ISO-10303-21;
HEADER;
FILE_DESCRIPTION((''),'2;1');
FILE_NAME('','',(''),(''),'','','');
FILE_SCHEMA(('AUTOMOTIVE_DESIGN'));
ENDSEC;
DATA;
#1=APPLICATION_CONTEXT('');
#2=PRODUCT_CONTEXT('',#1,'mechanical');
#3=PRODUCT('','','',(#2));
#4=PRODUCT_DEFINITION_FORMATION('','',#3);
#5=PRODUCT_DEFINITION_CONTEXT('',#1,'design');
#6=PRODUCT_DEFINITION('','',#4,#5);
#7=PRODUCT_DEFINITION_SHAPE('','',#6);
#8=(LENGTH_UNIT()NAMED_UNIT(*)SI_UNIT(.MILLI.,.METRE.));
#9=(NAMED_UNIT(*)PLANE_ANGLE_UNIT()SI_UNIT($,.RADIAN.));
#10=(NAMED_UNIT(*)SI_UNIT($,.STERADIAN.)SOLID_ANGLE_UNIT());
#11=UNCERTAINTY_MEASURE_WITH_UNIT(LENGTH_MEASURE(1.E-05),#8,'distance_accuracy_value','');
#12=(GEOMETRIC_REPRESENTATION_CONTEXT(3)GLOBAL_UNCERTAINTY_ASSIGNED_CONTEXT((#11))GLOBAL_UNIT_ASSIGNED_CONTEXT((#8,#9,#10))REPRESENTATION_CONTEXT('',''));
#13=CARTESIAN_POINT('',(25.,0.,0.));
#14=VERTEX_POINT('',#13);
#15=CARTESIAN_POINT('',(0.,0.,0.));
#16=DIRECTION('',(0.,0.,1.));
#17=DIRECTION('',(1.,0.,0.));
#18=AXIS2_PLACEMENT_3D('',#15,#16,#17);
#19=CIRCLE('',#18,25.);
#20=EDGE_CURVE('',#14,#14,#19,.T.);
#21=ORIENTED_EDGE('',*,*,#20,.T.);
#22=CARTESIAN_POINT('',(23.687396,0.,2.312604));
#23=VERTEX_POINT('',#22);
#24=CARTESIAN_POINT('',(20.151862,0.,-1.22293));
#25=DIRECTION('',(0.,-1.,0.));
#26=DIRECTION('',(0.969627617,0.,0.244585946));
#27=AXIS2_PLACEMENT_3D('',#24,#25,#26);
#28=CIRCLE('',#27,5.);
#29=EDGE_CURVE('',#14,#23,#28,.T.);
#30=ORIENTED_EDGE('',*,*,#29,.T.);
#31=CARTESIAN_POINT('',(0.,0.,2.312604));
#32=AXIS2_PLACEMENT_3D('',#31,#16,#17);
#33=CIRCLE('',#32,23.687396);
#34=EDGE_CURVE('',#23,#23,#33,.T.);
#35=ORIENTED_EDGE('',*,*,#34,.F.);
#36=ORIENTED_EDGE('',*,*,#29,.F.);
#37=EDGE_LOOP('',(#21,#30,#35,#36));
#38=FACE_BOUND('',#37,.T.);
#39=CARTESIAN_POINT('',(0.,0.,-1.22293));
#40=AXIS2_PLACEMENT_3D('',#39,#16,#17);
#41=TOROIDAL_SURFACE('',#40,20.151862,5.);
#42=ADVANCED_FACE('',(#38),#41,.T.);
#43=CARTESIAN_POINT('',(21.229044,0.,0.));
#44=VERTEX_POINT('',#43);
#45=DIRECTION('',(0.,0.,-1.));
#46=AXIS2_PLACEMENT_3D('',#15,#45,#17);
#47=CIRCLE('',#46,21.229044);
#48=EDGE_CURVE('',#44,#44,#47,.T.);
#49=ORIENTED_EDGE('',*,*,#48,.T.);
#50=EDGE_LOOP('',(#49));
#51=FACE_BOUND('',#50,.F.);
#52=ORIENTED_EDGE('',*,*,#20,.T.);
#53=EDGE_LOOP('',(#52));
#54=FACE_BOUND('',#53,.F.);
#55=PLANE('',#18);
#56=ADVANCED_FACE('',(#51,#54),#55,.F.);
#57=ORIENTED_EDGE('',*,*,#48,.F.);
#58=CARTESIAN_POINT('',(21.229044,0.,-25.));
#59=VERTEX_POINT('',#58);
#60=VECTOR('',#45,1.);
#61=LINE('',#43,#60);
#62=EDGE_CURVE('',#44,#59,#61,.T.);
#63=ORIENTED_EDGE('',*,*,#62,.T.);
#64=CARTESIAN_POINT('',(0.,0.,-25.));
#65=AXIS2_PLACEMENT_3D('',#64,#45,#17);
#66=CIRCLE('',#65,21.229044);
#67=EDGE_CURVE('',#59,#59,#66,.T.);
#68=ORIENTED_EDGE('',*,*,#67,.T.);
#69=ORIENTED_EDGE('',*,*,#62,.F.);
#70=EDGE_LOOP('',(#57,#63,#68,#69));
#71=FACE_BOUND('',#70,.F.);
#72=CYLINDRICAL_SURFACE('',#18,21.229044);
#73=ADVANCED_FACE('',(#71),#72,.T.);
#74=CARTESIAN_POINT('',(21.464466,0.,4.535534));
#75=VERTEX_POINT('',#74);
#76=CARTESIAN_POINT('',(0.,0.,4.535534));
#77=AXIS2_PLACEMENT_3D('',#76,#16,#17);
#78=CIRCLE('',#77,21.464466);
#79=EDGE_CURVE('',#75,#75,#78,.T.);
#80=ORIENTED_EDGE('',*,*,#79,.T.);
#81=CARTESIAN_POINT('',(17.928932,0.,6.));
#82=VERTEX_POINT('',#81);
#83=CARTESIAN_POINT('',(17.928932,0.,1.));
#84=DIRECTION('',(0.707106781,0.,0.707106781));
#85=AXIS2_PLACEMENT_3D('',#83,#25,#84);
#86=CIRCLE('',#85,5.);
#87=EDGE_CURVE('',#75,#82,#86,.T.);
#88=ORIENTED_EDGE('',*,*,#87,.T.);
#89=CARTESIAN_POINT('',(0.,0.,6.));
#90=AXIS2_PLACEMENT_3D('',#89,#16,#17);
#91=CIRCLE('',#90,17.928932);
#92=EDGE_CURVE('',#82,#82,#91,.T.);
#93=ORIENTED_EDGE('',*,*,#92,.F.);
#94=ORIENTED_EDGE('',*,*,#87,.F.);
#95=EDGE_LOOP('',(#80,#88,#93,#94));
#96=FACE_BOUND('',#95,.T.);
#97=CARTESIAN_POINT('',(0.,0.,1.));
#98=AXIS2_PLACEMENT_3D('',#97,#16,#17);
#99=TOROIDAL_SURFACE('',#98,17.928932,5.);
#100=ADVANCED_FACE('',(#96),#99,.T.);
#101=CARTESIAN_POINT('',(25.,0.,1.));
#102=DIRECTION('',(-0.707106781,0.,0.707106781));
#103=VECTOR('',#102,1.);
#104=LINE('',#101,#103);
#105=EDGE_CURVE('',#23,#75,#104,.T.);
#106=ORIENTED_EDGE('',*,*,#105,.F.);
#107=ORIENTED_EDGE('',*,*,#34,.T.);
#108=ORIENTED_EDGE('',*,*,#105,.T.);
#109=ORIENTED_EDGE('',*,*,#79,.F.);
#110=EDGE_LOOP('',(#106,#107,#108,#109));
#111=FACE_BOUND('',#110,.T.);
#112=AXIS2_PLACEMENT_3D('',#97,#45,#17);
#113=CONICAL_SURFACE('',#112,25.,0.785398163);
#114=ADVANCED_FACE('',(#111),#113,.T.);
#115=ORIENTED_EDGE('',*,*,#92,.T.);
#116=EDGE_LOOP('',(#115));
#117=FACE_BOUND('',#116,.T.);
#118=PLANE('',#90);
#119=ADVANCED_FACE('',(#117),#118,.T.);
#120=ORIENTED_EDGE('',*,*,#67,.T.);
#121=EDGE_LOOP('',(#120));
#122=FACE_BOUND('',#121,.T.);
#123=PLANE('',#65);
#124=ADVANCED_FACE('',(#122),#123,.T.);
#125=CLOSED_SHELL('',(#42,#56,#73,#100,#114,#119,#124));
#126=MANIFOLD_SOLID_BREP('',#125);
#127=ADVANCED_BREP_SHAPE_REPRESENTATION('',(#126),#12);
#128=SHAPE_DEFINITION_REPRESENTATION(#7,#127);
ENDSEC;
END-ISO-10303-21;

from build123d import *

# Parameters (mm, degrees)
F0_R     = 25
F1_DEPTH = 6
F2_R     = 21.4280280098
F3_DEPTH = 3
F4_SIZE  = 5
F6_R     = 21.8410066176
F7_DEPTH = 4
F8_R     = 21.2290439381
F9_DEPTH = 25


# Not quite as in the source:
# - a fillet or chamfer that OpenCascade refuses, or shapes differently, is made with other operations: its cross-section is extruded or revolved along the edge and cut away or added


with BuildPart() as f1:
    # F0 (on Top) → F1 (new body)
    with BuildSketch(Plane.XY):
        Circle(F0_R)
    extrude(amount=F1_DEPTH)

    # F2 (on face) → F3 (join)
    with BuildSketch(Plane.XY.offset(6)):
        Circle(F2_R)
    extrude(amount=-F3_DEPTH)

    # F4
    f4_edges = [f1.edges().sort_by_distance(p)[0] for p in [
        (-25, 0, 6),
    ]]
    chamfer(f4_edges, length=F4_SIZE)

    # F5: fillet of radius 5 on 3 edges, made by hand

    # F5_s1 → F5_t2 (revolve, cut)
    with BuildSketch(Plane.XZ):
        with BuildLine():
            ThreePointArc((25, 0), (24.5002551285, 1.2451619378), (23.687395822, 2.312604178))
            Line((23.687395822, 2.312604178), (25, 1))
            Line((25, 1), (25, 0))
        make_face()
    revolve(axis=Axis((0, 0, 1), (0, 0, 1)), mode=Mode.SUBTRACT)

    # F5_s3 → F5_t4 (revolve, cut)
    with BuildSketch(Plane.XZ):
        with BuildLine():
            ThreePointArc((21.4644660941, 4.5355339059), (19.84234935, 5.6193976626), (17.9289321881, 6))
            Line((17.9289321881, 6), (20, 6))
            Line((20, 6), (21.4644660941, 4.5355339059))
        make_face()
    revolve(axis=Axis((0, 0, 6), (0, 0, 1)), mode=Mode.SUBTRACT)

    # F6 (on face) → F7 (join)
    with BuildSketch(Plane(origin=(0, 0, 0), x_dir=(1, 0, 0), z_dir=(0, 0, -1))):
        Circle(F6_R)
    extrude(amount=-F7_DEPTH)

    # F8 (on face) → F9 (join)
    with BuildSketch(Plane(origin=(0, 0, 0), x_dir=(1, 0, 0), z_dir=(0, 0, -1))):
        Circle(F8_R)
    extrude(amount=F9_DEPTH)


solid = f1.part
